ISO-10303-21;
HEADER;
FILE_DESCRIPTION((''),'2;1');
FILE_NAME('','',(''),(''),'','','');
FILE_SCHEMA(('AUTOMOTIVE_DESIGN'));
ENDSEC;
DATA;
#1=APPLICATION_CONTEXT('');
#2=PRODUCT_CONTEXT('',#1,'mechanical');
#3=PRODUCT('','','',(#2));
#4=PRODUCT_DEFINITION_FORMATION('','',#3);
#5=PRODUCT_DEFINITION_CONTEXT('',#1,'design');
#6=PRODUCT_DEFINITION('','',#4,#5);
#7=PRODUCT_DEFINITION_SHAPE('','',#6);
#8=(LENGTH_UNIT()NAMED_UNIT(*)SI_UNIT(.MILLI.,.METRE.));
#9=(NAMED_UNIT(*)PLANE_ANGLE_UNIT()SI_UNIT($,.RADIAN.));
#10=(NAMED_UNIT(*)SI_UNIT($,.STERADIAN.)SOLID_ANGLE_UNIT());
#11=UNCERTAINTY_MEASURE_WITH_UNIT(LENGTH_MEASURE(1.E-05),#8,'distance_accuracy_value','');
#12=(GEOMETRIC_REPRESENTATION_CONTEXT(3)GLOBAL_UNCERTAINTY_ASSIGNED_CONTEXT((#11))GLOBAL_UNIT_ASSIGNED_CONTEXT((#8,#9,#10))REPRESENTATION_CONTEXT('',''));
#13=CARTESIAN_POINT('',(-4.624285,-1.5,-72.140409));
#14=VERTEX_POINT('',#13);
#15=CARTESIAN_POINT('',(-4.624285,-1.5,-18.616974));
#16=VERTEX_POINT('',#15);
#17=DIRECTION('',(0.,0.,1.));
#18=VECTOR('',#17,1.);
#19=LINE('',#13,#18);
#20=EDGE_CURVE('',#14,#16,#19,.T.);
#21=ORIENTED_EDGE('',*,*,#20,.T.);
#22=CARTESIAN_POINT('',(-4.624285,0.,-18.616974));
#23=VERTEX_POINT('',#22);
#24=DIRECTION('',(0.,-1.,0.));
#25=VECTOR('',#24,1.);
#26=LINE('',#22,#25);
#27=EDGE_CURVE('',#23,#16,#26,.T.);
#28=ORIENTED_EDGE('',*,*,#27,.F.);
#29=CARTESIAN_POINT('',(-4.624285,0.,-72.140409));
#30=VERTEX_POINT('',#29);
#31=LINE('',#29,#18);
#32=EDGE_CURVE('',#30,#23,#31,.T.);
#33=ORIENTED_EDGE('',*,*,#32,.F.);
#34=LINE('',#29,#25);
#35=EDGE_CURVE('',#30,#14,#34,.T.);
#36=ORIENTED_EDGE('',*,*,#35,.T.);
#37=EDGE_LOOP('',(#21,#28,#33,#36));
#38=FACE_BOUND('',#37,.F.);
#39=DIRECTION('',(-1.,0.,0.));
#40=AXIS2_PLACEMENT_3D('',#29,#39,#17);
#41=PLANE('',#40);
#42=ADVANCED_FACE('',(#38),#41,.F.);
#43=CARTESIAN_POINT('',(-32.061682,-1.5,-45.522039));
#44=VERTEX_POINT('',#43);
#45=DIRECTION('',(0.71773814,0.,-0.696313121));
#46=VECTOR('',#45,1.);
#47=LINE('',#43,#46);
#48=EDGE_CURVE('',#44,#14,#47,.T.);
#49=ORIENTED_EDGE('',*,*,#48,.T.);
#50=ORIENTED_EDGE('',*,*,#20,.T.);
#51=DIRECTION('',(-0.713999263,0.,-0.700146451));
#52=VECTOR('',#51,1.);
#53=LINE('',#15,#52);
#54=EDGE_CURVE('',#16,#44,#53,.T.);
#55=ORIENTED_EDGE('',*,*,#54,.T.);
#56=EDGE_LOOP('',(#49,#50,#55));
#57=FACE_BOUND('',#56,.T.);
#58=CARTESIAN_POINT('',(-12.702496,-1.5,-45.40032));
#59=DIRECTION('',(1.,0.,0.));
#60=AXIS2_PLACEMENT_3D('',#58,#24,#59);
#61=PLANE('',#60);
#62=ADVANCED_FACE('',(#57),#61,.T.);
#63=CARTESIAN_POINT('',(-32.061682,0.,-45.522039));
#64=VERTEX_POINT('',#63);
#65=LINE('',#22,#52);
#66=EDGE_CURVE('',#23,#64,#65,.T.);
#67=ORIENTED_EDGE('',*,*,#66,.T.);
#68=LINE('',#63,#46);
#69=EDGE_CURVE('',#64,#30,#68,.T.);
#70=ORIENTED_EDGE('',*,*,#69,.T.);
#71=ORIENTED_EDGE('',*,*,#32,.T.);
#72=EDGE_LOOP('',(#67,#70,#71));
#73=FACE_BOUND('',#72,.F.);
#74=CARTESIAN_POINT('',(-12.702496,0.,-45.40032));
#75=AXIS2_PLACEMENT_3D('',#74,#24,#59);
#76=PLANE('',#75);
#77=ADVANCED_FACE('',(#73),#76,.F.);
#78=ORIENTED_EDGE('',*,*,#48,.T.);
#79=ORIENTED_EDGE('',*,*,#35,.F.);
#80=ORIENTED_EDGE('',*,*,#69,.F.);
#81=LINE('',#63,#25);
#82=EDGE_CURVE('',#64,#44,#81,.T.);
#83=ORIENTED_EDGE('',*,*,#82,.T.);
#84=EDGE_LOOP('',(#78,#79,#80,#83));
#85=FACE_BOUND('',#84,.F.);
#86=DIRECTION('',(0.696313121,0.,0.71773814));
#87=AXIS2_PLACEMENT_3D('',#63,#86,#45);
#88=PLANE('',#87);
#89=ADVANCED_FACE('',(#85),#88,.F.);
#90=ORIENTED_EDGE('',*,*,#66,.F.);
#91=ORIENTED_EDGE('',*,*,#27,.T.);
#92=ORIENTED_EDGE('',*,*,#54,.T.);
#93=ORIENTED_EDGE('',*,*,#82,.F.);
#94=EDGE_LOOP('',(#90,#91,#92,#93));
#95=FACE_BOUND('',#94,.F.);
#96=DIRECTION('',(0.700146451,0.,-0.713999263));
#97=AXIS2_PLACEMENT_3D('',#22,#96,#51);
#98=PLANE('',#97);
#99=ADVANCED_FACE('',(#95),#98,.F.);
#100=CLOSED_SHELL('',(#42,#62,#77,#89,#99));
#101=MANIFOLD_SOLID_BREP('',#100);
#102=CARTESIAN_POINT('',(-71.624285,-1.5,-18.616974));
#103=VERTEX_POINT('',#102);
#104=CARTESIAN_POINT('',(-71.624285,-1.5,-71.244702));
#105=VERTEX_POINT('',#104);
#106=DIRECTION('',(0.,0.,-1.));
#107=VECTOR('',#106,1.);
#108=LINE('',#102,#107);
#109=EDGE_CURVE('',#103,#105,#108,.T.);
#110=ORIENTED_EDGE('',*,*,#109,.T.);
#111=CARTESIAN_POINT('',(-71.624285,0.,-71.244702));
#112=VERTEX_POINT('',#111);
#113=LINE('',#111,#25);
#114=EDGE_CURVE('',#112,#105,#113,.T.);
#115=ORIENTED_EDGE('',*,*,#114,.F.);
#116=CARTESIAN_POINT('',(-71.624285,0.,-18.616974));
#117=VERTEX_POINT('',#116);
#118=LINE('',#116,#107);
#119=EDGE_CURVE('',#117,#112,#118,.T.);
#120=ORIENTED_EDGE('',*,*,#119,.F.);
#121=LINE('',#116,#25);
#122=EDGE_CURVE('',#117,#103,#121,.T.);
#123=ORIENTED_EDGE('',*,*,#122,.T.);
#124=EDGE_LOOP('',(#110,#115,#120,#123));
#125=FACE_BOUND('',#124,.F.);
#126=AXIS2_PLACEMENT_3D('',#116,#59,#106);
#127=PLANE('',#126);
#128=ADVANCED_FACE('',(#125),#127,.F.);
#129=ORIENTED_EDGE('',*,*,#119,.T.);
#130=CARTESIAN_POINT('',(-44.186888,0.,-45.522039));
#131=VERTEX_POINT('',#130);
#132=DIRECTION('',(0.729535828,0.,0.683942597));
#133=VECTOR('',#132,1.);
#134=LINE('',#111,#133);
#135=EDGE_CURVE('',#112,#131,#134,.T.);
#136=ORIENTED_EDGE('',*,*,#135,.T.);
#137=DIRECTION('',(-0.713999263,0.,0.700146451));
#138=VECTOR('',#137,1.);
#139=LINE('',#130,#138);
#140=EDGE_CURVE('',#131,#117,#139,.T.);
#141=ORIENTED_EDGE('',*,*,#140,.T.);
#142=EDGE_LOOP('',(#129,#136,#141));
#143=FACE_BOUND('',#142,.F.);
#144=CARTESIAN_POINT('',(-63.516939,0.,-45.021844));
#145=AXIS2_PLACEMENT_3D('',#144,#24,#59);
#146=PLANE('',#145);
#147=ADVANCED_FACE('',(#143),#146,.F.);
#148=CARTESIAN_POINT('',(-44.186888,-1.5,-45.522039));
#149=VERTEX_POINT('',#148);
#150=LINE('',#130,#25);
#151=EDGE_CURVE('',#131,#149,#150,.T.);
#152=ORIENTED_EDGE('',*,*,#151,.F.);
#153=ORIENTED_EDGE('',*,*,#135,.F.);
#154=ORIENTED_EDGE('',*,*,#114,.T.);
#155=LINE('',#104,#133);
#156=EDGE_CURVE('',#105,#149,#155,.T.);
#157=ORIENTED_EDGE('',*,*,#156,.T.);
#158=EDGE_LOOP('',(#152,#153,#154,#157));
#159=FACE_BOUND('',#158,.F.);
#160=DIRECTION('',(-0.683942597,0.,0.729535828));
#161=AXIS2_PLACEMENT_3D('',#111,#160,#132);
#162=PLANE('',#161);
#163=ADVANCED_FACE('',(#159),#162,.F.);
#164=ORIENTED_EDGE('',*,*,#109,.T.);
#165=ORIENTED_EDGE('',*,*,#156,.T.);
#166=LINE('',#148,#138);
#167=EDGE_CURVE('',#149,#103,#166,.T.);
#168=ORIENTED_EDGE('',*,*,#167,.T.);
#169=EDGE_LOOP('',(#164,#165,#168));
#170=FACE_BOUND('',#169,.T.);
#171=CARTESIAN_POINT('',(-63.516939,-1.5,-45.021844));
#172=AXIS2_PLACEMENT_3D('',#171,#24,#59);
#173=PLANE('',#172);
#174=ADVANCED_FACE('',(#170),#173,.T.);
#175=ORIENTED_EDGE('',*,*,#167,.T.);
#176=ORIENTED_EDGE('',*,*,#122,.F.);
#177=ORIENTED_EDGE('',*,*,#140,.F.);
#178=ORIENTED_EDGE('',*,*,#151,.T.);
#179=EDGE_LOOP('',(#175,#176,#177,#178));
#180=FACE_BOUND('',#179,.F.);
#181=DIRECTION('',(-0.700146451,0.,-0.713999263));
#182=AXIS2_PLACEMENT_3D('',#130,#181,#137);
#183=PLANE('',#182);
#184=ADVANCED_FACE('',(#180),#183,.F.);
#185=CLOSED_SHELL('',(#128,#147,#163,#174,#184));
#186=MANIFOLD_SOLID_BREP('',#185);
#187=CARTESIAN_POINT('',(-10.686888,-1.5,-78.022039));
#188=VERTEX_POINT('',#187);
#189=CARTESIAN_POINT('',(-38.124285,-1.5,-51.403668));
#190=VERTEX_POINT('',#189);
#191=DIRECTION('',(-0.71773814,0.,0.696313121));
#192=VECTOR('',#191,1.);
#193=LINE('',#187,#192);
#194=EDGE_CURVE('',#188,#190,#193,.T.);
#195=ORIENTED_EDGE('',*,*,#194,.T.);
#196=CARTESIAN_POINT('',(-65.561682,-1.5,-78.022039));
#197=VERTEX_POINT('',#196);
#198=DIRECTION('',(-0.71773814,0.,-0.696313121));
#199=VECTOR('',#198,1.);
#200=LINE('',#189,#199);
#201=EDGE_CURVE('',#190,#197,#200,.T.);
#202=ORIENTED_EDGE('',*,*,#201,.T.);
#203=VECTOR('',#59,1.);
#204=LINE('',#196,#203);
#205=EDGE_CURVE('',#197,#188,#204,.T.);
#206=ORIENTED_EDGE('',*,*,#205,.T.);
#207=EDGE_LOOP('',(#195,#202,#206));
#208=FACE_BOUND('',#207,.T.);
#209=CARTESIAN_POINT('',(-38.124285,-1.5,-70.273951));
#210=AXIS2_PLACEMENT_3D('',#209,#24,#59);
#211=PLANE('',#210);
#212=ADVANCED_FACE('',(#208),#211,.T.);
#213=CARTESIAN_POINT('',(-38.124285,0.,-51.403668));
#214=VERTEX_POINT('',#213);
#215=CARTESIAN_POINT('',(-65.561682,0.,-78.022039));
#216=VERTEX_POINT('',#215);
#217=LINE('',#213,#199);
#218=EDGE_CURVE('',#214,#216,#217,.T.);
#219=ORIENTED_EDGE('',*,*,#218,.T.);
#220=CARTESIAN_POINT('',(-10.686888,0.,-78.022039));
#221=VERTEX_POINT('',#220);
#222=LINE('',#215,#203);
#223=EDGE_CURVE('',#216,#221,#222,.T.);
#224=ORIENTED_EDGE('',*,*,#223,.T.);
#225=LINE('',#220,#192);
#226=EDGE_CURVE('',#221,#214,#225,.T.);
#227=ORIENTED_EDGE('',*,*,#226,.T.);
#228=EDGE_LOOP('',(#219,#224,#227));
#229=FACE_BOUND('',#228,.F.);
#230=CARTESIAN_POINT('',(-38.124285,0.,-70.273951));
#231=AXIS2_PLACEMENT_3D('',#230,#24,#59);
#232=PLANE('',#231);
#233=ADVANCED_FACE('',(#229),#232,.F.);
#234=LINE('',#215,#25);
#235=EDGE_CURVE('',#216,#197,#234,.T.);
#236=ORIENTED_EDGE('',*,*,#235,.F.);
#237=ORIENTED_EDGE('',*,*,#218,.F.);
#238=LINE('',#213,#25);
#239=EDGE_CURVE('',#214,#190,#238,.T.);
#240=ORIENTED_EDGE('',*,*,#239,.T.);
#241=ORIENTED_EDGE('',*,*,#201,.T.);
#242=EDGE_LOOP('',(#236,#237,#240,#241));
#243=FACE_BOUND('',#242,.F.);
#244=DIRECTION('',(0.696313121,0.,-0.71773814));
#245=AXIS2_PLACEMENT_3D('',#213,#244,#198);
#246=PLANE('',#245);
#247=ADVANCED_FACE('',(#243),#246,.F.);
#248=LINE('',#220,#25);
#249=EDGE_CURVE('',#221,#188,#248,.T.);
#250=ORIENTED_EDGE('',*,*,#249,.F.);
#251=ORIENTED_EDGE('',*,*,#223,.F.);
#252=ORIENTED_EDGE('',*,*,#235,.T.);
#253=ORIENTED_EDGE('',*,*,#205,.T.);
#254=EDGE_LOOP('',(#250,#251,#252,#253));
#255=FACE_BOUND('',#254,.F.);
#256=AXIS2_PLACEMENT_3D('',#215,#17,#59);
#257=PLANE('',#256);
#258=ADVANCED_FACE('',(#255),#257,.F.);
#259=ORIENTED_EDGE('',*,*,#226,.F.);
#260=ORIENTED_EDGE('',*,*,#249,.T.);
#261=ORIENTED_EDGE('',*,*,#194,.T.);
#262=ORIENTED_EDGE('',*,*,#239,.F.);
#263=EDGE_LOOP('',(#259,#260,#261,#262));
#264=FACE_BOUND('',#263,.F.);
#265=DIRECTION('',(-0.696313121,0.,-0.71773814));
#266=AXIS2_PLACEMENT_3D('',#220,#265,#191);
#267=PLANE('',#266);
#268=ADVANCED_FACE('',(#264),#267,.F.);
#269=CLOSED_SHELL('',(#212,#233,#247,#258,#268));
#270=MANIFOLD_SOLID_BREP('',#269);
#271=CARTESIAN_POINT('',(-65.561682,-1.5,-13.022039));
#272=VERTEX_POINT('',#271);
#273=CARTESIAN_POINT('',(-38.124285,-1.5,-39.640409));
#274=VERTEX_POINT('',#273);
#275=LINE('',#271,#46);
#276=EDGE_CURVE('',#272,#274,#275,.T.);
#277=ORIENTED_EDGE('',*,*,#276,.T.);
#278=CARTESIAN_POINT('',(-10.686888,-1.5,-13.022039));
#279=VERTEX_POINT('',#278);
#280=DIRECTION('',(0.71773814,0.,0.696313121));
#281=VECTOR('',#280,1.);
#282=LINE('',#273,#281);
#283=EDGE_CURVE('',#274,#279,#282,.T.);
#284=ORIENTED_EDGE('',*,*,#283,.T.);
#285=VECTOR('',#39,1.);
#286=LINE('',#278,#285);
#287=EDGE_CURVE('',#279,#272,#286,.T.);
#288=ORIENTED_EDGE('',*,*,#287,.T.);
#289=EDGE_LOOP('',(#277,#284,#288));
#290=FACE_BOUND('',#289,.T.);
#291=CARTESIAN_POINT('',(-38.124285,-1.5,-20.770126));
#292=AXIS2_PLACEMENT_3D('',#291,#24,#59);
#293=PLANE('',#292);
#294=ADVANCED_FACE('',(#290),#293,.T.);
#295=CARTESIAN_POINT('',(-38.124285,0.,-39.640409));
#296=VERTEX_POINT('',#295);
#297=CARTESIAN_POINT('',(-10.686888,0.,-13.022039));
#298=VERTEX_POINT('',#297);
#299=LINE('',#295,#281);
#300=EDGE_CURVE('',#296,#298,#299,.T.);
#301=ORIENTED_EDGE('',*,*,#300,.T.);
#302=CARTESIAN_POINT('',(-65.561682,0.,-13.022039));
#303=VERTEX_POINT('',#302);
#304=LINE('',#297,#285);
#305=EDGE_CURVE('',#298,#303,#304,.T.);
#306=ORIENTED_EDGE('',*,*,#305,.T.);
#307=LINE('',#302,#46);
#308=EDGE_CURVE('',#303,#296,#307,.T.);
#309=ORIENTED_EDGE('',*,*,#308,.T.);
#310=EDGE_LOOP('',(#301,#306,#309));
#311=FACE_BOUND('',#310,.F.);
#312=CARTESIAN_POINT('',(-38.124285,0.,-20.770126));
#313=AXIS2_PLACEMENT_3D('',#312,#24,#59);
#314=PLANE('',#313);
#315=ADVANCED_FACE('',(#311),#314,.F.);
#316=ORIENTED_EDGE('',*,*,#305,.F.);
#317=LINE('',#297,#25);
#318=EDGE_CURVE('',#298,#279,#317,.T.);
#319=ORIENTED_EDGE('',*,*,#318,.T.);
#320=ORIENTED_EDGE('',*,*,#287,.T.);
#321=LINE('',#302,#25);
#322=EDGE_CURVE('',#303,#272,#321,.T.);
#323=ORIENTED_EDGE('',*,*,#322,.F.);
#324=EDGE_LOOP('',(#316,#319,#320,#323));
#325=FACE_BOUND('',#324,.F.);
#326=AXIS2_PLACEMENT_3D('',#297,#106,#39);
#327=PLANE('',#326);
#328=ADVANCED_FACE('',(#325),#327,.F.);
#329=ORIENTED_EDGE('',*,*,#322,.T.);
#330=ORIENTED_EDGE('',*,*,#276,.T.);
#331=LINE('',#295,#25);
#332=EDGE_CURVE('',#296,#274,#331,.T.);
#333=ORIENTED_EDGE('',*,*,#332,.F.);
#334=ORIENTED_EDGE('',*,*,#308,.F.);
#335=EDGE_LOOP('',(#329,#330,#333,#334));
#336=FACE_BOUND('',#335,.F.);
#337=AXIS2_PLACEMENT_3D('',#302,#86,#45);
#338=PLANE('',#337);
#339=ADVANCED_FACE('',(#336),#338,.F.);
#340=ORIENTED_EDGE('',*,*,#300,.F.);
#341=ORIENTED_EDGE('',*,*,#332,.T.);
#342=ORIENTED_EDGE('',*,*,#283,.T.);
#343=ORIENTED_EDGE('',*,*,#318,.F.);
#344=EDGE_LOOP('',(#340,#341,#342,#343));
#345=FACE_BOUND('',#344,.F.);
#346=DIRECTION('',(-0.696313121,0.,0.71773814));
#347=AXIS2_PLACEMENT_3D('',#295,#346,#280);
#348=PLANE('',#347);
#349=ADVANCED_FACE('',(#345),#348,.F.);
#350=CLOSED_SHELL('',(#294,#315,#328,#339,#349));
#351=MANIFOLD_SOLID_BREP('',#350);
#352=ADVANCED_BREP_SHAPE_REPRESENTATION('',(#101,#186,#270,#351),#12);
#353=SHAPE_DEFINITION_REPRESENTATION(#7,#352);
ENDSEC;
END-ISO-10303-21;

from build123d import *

# Parameters (mm, degrees)
F1_DEPTH = 1.5


# Not quite as in the source:
# - a feature names something its author has since deleted; it is built from what else it names


with BuildPart() as f1:
    # F0 (on Front) → F1 (new body)
    with BuildSketch(Plane.XZ):
        Polygon((-10.6868883812, -13.0220385311), (-65.5616819859, -13.0220385311), (-38.1242851835, -39.6404085632), align=None)
    extrude(amount=F1_DEPTH)


with BuildPart() as f1b:
    # F0 (on Front) → F1, piece 2 (new body)
    with BuildSketch(Plane.XZ):
        Polygon((-38.1242851835, -51.403668499), (-65.5616819859, -78.0220385311), (-10.6868883812, -78.0220385311), align=None)
    extrude(amount=F1_DEPTH)


with BuildPart() as f1c:
    # F0 (on Front) → F1, piece 3 (new body)
    with BuildSketch(Plane.XZ):
        Polygon((-4.6242851835, -72.1404085632), (-4.6242851835, -18.6169743538), (-32.0616819859, -45.5220385311), align=None)
    extrude(amount=F1_DEPTH)


with BuildPart() as f1d:
    # F0 (on Front) → F1, piece 4 (new body)
    with BuildSketch(Plane.XZ):
        Polygon((-44.1868883812, -45.5220385311), (-71.6242851835, -18.6169743538), (-71.6242851835, -71.2447017431), align=None)
    extrude(amount=F1_DEPTH)


solid = Compound([f1.part, f1b.part, f1c.part, f1d.part])
